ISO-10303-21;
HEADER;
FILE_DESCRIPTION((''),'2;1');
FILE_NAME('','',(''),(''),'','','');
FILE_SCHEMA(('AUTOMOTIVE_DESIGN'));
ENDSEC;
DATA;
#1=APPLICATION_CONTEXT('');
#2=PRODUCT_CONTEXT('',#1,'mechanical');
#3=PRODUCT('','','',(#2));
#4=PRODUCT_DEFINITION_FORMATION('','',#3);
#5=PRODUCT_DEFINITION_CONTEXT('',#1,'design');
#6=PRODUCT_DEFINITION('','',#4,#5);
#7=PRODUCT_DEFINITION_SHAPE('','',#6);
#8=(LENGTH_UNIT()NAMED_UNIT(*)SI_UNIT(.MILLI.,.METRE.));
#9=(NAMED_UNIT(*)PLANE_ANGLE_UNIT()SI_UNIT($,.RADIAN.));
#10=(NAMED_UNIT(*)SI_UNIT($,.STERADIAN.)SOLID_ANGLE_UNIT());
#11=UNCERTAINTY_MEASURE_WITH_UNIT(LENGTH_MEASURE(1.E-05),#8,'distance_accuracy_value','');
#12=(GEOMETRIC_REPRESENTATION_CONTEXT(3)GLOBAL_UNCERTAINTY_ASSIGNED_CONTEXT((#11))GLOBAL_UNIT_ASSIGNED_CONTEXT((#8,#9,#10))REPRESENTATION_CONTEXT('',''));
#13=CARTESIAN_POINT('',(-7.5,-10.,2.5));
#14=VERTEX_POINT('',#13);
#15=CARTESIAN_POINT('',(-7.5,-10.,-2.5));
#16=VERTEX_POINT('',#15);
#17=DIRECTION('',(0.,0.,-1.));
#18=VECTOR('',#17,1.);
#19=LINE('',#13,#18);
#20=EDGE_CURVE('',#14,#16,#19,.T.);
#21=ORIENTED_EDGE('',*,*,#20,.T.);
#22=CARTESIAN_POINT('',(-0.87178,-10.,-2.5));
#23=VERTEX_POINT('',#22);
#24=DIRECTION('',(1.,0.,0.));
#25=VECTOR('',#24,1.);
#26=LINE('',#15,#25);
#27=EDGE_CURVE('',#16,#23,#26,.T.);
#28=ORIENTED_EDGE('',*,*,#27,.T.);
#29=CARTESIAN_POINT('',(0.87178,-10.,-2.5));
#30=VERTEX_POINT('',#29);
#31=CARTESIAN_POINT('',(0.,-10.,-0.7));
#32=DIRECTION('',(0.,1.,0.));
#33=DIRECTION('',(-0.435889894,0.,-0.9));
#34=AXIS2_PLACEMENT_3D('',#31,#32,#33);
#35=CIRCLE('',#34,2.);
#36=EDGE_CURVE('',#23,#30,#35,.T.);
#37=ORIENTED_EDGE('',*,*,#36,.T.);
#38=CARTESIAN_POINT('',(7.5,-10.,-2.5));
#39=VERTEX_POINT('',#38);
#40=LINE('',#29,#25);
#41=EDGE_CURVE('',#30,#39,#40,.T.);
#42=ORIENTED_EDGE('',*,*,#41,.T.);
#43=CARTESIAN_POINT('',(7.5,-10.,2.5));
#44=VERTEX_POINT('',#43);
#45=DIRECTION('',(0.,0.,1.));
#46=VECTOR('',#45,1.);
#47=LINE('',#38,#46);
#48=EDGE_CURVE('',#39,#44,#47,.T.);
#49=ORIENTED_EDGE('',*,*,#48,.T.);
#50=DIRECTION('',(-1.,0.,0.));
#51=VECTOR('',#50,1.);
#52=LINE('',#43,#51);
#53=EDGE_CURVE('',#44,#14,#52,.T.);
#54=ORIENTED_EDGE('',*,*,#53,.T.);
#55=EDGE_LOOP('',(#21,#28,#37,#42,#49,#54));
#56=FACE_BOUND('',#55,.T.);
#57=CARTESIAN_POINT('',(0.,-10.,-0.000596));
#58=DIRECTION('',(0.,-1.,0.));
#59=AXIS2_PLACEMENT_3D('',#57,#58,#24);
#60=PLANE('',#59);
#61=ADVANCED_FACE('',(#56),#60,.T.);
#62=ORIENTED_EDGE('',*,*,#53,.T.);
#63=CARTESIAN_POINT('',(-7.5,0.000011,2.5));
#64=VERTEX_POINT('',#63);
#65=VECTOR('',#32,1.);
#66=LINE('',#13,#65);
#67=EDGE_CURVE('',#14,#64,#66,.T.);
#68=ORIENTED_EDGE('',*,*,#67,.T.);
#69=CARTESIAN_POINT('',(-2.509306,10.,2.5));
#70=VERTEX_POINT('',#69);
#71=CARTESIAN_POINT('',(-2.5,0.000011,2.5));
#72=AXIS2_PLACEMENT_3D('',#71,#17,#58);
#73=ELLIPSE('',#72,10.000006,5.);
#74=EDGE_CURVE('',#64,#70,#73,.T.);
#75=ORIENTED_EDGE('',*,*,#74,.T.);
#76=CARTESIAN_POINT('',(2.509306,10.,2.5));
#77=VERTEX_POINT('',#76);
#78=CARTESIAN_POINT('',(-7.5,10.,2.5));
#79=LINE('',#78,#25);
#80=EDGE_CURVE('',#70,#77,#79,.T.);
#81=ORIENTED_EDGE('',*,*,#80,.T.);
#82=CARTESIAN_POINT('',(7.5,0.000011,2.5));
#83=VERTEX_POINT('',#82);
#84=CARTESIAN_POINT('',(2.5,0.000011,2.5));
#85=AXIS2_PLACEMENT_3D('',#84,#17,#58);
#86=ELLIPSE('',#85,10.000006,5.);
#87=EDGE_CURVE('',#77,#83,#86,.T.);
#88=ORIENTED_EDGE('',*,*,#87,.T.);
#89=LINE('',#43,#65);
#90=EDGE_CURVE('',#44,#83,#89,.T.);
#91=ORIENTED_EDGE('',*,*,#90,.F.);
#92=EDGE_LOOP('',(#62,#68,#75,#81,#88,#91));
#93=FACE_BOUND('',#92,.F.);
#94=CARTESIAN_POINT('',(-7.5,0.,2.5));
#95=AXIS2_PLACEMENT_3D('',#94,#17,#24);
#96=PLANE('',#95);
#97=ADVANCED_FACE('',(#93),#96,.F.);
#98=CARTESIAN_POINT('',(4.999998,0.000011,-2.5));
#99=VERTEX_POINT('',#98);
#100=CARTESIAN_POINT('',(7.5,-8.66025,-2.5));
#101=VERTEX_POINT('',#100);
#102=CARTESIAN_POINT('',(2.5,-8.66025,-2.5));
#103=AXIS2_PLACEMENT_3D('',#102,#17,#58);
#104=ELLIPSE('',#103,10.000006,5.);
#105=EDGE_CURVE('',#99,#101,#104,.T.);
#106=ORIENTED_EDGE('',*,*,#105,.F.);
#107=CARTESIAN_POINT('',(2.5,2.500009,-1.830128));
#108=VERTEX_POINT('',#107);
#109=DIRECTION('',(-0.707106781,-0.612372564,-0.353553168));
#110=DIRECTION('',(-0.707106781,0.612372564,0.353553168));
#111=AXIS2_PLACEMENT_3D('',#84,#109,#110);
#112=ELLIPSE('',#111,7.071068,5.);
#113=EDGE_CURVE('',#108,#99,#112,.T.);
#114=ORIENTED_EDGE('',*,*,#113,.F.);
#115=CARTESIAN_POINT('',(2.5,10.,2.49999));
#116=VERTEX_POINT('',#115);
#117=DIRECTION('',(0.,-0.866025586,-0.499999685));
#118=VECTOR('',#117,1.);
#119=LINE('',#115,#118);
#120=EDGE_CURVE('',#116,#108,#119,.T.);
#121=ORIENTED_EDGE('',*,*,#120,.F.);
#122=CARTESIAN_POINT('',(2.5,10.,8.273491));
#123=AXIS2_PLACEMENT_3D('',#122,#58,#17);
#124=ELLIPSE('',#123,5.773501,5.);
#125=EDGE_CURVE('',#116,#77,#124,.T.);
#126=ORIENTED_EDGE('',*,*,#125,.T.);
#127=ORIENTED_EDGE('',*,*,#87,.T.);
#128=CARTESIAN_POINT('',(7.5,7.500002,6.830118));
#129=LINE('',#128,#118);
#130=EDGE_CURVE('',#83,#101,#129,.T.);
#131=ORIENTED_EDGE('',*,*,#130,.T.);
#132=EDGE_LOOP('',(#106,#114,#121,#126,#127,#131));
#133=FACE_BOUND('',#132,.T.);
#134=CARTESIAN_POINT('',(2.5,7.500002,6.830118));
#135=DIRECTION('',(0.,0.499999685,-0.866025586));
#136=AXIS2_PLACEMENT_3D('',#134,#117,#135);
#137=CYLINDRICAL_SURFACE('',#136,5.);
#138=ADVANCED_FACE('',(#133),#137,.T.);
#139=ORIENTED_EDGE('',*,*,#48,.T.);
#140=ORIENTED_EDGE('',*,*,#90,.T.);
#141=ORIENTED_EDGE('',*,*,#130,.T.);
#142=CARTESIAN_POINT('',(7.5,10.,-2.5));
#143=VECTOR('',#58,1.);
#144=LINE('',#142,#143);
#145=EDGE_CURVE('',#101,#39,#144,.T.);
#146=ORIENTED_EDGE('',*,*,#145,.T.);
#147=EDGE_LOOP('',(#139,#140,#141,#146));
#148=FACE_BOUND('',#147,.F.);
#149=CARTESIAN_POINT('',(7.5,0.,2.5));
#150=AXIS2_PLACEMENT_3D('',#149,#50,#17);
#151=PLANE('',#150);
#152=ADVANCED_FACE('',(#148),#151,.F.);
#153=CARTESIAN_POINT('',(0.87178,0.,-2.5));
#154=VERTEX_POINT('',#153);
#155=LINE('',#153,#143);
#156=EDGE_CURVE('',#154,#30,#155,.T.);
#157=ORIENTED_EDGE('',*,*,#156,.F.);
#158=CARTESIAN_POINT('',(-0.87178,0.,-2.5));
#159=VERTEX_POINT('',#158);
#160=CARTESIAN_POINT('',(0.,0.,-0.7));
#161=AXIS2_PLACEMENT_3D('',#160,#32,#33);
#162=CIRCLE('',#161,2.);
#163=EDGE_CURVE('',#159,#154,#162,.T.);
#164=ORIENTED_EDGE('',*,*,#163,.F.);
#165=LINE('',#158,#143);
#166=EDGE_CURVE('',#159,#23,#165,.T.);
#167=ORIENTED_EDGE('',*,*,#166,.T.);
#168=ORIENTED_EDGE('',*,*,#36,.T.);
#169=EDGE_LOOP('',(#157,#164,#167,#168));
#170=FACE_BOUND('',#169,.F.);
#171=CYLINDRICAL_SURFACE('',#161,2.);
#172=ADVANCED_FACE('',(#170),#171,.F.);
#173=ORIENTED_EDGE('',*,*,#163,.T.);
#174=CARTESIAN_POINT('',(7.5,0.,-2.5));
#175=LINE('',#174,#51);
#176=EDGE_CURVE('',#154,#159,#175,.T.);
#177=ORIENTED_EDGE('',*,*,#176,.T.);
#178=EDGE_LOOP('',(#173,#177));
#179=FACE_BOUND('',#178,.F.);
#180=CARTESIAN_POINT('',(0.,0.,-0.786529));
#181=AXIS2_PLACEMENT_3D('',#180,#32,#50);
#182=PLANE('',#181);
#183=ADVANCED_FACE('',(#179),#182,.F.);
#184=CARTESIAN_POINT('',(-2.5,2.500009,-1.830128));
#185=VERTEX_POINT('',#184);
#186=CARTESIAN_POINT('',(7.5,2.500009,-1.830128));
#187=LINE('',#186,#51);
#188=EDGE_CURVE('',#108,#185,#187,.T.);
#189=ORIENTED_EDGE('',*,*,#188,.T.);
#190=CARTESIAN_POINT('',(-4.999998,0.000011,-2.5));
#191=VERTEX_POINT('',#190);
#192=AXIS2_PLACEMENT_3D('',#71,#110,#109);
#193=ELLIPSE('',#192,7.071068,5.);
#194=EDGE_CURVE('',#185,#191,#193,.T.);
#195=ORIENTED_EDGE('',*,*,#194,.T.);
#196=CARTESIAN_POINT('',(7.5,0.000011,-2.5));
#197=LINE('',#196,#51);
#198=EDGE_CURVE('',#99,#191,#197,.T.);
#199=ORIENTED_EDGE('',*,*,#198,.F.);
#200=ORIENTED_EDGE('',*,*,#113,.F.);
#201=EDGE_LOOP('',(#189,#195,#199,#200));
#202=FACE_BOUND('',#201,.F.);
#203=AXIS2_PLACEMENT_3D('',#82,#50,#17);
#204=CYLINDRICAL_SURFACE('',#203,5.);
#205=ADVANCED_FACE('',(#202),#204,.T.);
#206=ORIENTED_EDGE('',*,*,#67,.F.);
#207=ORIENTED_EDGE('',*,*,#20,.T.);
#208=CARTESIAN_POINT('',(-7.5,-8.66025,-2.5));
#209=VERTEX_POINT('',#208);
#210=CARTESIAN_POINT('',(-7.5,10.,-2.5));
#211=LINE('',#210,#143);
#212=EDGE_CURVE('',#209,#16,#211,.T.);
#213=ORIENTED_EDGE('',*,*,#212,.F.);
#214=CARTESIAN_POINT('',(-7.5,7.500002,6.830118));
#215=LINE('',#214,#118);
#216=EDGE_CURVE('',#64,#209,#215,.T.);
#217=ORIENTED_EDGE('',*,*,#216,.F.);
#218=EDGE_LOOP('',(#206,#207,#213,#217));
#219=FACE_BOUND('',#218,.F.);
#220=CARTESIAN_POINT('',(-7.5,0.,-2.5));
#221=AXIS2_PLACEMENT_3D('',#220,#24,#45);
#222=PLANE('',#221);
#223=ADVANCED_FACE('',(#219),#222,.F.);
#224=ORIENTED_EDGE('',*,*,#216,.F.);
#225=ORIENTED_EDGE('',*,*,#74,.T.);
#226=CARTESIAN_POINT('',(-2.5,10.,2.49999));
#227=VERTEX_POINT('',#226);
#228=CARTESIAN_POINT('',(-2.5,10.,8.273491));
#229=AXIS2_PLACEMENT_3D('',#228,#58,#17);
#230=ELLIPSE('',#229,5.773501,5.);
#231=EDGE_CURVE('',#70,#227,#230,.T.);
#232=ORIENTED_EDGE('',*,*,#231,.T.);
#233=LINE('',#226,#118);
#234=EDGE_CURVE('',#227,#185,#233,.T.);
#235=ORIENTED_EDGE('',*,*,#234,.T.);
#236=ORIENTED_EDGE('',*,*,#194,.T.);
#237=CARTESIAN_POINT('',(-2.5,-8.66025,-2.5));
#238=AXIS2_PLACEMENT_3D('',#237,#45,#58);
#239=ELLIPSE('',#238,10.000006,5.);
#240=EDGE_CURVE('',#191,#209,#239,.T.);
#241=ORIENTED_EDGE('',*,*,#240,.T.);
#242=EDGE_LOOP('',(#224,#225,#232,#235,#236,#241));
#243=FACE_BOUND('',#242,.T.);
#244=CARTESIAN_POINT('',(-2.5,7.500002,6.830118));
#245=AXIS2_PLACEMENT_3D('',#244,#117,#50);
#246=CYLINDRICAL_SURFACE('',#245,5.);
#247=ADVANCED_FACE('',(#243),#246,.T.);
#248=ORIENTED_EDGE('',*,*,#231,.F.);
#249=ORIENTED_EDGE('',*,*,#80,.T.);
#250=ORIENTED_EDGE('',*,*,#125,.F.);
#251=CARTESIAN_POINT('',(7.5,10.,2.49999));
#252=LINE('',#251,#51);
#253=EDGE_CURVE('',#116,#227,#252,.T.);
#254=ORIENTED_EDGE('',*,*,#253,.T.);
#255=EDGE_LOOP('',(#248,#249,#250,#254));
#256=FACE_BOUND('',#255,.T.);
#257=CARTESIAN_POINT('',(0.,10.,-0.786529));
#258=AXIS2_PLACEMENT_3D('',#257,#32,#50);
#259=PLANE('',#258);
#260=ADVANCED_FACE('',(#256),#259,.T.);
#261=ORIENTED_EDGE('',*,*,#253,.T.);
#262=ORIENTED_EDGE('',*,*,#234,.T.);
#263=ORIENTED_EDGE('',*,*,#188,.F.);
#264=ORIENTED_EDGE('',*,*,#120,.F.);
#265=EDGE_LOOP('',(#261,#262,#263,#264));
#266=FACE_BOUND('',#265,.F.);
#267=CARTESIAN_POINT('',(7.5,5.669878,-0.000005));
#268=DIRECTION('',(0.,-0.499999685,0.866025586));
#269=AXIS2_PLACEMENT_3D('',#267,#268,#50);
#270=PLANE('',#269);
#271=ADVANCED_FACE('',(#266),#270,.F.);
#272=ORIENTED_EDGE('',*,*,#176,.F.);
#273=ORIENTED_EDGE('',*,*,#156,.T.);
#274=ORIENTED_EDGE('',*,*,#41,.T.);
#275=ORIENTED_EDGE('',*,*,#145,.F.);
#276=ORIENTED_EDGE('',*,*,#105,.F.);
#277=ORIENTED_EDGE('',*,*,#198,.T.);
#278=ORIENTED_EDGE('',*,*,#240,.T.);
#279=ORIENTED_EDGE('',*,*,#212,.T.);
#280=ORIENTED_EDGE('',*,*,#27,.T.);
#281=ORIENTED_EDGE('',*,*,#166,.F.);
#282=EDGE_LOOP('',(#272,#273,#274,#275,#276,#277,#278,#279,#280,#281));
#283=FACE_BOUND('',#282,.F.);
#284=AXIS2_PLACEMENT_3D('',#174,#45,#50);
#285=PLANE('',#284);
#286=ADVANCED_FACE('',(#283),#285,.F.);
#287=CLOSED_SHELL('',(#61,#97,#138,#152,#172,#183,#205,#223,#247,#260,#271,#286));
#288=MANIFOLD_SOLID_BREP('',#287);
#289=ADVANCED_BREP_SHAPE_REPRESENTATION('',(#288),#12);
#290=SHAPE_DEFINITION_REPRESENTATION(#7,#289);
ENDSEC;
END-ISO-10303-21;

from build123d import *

# Parameters (mm, degrees)
F1_DEPTH = 10
F3_DEPTH = 10
F4_SIZE2 = 8.660244
F4_SIZE  = 4.99999
F5_R     = 5


# Not quite as in the source:
# - a fillet or chamfer is up to 0.001 mm smaller than in the source, because OpenCascade refuses the exact size


with BuildPart() as f1:
    # F0 (on Front) → F1 (new body)
    with BuildSketch(Plane.XZ):
        with BuildLine():
            Line((0.8717797887, -2.5), (7.5, -2.5))
            Line((7.5, -2.5), (7.5, 2.5))
            Line((7.5, 2.5), (-7.5, 2.5))
            Line((-7.5, 2.5), (-7.5, -2.5))
            Line((-7.5, -2.5), (-0.8717797887, -2.5))
            ThreePointArc((-0.8717797887, -2.5), (0, 1.3), (0.8717797887, -2.5))
        make_face()
    extrude(amount=F1_DEPTH)

    # F2 (on face) → F3 (join)
    with BuildSketch(Plane(origin=(0, 0, 0), x_dir=(-1, 0, 0), z_dir=(0, 1, 0))):
        with BuildLine():
            ThreePointArc((0.8717797887, -2.5), (0, 1.3), (-0.8717797887, -2.5))
            Line((-0.8717797887, -2.5), (0.8717797887, -2.5))
        make_face()
        with BuildLine():
            Line((7.5, 2.5), (-7.5, 2.5))
            Line((-7.5, 2.5), (-7.5, -2.5))
            Line((-7.5, -2.5), (-0.8717797887, -2.5))
            ThreePointArc((-0.8717797887, -2.5), (0, 1.3), (0.8717797887, -2.5))
            Line((0.8717797887, -2.5), (7.5, -2.5))
            Line((7.5, -2.5), (7.5, 2.5))
        make_face()
    extrude(amount=F3_DEPTH)

    # F4 (size 5 and 8.6602540378 in the source; OpenCascade refuses exactly that, so slightly less here)
    f4_edges = [f1.edges().sort_by_distance(p)[0] for p in [
        (0, 10, -2.5),
    ]]
    f4_side = f1.faces().sort_by_distance((0, 10, 0))[0]
    chamfer(f4_edges, length=F4_SIZE, length2=F4_SIZE2, reference=f4_side)

    # F5
    f5_edges = [f1.edges().sort_by_distance(p)[0] for p in [
        (0, 1.339756, -2.5),
        (7.5, 5.669878, -5e-06),
        (-7.5, 5.669878, -5e-06),
    ]]
    fillet(f5_edges, radius=F5_R)


solid = f1.part
